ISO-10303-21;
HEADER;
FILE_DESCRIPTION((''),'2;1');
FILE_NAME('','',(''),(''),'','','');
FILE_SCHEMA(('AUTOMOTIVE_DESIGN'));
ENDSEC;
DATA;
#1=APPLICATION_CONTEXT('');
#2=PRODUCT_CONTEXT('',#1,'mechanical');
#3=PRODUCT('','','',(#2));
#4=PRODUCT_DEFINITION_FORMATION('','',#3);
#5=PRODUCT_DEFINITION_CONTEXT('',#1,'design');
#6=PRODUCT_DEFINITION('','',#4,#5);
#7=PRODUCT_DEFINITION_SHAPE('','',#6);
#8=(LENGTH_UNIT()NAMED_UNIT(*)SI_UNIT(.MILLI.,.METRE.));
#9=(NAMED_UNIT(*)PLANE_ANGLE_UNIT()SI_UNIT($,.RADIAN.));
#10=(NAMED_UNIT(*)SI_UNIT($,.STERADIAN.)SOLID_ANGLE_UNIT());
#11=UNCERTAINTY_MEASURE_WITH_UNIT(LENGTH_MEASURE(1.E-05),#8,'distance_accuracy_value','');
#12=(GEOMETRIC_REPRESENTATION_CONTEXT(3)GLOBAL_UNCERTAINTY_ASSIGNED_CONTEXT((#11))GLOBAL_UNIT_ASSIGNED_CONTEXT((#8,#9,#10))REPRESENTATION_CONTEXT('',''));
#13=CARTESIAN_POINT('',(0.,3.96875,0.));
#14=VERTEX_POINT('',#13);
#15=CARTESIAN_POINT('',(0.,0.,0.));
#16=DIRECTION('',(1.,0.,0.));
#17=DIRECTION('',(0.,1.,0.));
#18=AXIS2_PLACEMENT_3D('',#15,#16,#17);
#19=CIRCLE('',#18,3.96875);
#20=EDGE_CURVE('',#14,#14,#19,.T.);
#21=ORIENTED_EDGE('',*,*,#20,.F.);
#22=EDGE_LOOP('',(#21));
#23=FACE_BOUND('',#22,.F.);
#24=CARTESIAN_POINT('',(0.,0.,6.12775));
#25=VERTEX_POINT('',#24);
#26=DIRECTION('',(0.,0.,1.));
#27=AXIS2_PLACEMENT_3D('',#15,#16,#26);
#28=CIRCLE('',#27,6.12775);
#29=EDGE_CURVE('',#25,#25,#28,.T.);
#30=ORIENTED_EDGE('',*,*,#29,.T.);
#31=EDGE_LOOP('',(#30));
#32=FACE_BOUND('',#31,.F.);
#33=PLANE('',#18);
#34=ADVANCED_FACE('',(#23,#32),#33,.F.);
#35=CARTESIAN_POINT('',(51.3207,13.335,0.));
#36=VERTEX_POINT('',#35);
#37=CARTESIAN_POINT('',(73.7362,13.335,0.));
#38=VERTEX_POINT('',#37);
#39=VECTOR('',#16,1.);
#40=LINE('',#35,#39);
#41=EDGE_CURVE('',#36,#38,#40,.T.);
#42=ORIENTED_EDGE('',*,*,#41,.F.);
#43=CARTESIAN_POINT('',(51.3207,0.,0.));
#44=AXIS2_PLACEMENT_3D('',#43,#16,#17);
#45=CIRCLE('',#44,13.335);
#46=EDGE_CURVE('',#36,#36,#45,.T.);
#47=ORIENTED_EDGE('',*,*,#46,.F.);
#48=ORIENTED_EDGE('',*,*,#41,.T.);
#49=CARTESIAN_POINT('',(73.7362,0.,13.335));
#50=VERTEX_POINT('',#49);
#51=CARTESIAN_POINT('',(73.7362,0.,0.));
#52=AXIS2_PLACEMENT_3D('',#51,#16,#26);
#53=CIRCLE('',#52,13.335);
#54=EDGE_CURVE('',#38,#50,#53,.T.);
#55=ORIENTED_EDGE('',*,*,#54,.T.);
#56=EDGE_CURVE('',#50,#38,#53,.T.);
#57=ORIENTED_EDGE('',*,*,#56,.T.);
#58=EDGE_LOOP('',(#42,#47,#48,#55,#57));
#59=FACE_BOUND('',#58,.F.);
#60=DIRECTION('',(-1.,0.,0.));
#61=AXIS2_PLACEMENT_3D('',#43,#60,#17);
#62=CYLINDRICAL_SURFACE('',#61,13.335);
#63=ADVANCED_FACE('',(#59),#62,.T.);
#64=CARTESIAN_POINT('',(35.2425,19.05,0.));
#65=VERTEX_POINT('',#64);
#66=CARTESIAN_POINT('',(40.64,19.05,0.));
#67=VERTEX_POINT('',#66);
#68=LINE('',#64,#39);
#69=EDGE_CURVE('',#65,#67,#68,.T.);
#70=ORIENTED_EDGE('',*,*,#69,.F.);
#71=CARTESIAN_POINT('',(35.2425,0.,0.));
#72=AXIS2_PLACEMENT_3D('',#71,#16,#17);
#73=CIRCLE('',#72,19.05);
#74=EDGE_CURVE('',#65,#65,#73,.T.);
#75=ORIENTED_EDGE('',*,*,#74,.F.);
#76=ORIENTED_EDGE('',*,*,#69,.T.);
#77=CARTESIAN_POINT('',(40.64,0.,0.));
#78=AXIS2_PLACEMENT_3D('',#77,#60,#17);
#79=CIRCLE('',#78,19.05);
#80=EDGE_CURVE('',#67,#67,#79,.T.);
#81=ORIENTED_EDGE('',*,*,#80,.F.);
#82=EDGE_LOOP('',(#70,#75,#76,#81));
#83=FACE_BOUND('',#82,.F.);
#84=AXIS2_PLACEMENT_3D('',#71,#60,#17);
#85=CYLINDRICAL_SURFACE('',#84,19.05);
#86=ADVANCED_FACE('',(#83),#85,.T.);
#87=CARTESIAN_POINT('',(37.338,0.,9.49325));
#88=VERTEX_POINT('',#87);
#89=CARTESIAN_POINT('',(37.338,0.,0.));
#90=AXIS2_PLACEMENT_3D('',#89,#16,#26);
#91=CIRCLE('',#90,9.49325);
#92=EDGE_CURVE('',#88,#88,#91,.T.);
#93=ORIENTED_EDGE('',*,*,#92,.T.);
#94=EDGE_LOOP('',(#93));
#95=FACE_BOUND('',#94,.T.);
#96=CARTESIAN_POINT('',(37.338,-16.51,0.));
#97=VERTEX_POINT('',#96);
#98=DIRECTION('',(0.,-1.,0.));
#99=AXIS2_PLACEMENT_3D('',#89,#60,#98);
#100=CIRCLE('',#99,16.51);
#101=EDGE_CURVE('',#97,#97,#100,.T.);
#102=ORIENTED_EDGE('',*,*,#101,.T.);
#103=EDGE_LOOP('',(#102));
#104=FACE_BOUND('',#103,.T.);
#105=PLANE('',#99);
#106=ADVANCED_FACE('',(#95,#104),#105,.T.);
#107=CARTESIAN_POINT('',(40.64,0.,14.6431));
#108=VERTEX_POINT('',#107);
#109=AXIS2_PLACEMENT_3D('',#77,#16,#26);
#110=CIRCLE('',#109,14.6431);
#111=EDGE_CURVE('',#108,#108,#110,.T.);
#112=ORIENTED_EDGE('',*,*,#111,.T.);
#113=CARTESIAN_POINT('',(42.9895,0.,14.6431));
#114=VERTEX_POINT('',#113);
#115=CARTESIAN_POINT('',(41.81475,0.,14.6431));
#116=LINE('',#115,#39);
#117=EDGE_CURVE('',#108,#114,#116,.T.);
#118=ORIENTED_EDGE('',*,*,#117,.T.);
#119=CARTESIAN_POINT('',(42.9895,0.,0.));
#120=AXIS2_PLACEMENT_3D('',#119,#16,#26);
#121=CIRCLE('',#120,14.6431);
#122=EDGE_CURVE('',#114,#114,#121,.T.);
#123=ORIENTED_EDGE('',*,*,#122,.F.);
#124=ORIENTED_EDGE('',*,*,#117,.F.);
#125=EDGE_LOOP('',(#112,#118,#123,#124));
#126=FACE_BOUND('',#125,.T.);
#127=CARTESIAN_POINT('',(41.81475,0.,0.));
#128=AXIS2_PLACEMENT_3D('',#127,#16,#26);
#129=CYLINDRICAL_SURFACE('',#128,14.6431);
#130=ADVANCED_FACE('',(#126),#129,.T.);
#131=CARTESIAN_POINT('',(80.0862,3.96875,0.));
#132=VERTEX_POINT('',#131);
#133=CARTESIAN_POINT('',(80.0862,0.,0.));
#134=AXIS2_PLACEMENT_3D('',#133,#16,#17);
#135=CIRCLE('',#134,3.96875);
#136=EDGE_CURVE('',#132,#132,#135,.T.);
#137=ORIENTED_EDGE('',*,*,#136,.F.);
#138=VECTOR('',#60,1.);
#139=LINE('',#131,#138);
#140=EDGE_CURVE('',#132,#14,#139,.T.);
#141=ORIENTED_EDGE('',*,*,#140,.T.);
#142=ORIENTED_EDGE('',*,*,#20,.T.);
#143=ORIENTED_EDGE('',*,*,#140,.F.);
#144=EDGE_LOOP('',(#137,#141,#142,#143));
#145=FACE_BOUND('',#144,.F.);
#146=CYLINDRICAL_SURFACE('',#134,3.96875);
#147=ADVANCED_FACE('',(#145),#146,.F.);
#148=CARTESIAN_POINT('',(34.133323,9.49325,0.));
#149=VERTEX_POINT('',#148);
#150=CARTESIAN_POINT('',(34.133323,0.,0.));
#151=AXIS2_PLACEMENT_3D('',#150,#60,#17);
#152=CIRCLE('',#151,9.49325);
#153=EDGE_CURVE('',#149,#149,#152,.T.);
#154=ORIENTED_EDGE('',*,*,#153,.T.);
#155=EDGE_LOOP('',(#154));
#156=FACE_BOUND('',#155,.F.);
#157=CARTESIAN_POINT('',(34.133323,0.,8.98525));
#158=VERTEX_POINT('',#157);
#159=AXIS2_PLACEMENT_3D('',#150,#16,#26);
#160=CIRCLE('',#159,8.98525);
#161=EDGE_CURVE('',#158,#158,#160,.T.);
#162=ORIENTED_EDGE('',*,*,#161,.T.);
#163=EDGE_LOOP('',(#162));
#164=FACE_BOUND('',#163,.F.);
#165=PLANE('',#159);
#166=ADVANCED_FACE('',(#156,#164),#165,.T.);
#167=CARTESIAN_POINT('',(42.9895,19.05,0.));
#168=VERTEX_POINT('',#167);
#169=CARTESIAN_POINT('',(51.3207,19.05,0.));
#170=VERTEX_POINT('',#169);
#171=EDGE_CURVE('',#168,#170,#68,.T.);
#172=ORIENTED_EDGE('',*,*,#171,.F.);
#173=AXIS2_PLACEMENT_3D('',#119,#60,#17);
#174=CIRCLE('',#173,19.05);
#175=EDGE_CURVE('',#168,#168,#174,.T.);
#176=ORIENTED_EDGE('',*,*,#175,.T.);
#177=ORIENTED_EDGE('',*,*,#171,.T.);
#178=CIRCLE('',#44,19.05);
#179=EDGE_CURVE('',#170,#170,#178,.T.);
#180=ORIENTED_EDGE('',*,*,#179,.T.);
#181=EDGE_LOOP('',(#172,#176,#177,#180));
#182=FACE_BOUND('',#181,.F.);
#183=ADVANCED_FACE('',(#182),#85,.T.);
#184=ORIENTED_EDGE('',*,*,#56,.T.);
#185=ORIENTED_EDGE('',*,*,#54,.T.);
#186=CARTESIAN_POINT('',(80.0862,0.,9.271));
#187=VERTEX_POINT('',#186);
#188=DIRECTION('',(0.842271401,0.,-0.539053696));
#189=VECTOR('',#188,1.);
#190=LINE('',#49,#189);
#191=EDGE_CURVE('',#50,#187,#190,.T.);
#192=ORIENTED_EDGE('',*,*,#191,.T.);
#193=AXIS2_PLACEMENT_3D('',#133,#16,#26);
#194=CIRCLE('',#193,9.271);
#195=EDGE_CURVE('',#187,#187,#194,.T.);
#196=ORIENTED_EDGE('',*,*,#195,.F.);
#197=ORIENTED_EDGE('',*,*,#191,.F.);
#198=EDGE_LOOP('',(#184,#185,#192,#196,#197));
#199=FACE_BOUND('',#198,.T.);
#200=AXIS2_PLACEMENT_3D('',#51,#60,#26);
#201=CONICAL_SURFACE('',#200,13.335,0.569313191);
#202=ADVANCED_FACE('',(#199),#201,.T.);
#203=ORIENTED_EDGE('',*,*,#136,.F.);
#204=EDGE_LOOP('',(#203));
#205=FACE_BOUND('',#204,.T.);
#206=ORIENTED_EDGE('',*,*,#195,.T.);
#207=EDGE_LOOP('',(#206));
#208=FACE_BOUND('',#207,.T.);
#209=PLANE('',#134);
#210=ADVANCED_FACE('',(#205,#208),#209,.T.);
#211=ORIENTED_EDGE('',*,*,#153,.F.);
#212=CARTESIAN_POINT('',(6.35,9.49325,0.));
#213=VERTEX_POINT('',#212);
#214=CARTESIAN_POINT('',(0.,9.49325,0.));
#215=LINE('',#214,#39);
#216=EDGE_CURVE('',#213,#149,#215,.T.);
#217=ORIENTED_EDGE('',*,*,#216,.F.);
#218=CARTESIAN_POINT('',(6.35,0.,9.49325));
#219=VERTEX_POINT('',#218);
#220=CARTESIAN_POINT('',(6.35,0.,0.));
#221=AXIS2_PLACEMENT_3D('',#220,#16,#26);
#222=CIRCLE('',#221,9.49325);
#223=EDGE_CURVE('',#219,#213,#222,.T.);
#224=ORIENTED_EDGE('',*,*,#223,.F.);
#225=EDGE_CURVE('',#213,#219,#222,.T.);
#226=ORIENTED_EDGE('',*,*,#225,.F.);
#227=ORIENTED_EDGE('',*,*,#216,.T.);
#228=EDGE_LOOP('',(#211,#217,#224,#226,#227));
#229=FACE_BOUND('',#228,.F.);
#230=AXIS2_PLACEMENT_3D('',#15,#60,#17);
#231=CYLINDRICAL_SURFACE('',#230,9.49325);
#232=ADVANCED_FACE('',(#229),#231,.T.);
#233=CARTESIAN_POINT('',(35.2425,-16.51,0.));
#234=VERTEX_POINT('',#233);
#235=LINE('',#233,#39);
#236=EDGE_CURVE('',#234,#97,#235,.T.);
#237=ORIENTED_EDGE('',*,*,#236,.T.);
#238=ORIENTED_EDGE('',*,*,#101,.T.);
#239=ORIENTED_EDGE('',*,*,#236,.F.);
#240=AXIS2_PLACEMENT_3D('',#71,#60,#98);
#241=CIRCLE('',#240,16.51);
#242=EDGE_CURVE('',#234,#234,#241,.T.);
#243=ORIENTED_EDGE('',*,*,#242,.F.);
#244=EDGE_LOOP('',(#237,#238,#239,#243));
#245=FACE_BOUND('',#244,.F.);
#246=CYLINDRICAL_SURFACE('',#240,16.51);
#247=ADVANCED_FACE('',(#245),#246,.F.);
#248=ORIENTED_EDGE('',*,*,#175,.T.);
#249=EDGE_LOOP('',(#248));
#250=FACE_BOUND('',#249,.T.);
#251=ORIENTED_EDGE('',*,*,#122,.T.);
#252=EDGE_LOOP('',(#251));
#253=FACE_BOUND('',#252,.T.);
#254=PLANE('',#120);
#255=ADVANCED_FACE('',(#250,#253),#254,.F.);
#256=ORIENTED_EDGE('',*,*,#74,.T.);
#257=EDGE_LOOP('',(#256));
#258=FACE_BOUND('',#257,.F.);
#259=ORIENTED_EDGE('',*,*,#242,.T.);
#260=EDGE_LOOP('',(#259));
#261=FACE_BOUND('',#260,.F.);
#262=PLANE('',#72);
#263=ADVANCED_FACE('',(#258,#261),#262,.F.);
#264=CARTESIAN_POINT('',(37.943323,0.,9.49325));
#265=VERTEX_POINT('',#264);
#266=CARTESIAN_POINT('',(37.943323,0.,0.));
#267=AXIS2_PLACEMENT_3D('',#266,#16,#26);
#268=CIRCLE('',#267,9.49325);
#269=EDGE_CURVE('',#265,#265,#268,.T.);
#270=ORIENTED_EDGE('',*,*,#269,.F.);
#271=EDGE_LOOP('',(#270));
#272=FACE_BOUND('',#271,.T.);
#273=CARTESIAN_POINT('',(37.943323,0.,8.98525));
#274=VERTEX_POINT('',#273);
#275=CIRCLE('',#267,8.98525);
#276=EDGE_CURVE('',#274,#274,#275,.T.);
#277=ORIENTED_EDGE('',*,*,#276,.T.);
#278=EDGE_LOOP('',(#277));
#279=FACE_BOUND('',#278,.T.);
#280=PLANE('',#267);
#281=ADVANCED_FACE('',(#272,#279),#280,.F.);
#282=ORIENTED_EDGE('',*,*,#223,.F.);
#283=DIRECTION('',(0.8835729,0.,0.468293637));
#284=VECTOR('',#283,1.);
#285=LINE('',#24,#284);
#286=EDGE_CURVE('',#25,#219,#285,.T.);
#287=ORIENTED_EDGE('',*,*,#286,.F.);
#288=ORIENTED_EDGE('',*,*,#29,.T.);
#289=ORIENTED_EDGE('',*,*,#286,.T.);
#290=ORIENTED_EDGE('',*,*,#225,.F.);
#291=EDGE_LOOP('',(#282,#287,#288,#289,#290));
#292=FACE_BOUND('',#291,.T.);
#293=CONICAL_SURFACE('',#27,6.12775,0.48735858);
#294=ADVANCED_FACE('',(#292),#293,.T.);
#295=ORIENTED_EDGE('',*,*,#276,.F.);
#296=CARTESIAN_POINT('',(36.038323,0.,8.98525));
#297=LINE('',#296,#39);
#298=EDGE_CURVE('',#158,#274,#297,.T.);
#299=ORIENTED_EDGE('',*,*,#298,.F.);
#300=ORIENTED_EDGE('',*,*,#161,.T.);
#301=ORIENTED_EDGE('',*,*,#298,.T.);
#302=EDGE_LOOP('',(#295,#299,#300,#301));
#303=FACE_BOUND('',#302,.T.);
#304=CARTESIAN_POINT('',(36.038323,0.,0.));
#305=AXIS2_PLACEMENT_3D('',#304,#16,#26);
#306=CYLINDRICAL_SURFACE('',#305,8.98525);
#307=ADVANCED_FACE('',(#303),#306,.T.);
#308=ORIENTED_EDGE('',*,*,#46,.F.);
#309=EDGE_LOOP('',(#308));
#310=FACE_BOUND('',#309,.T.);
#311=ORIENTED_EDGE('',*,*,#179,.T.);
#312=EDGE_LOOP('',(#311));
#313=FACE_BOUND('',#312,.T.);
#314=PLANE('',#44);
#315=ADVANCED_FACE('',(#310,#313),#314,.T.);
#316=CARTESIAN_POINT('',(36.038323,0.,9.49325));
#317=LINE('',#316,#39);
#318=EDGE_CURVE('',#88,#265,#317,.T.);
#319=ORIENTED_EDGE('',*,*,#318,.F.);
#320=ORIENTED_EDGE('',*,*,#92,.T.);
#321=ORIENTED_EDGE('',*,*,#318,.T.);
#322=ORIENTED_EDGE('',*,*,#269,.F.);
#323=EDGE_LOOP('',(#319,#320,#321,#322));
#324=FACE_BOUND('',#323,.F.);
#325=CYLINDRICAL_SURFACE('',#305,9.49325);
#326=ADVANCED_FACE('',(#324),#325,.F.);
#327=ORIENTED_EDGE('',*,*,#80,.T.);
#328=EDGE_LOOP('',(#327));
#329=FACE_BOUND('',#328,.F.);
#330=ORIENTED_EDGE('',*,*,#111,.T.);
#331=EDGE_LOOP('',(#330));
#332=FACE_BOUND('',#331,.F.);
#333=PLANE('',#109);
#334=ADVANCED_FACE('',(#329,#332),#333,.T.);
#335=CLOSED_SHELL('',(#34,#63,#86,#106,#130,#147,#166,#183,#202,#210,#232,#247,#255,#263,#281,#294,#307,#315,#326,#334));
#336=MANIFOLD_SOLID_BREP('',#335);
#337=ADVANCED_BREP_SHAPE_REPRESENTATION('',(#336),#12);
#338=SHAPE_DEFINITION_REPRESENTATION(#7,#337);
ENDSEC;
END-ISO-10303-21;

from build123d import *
from build123d import SkipClean  # not in build123d's __all__

# Parameters (mm, degrees)
F0_R     = 9.49325
F1_DEPTH = 35.2425
F2_R     = 19.05
F3_DEPTH = 16.0782
F4_R     = 13.335
F5_DEPTH = 28.7655
F6_R     = 3.96875
F7_DEPTH = 80.0862
F8_R     = 16.51
F8_R_2   = 9.49325
F9_DEPTH = 2.0955
F10_W    = 3.81
F10_H    = 0.508
F12_W    = 2.3495
F12_H    = 4.4069


with BuildPart() as f1:
    # F0 (on Right) → F1 (new body)
    with BuildSketch(Plane.YZ):
        Circle(F0_R)
    extrude(amount=F1_DEPTH)

    # F2 (on face) → F3 (join)
    with BuildSketch(Plane.YZ.offset(35.2425)):
        Circle(F2_R)
    extrude(amount=F3_DEPTH)

    # F4 (on face) → F5 (join)
    with BuildSketch(Plane.YZ.offset(51.3207)):
        Circle(F4_R)
    extrude(amount=F5_DEPTH)

    # F6 (on face) → F7 (cut, through all)
    with BuildSketch(Plane.YZ.offset(80.0862)):
        Circle(F6_R)
    extrude(amount=-F7_DEPTH, mode=Mode.SUBTRACT)

    # F8 (on face) → F9 (cut)
    with BuildSketch(Plane(origin=(35.2425, 0, 0), x_dir=(0, -1, 0), z_dir=(-1, 0, 0))):
        Circle(F8_R)
        Circle(F8_R_2, mode=Mode.SUBTRACT)
    with SkipClean():  # cleaning this boolean's faces spoils the solid; the shape is the same uncleaned
        extrude(amount=-F9_DEPTH, mode=Mode.SUBTRACT)

    # F10 (on Front) → F11 (revolve, cut)
    with BuildSketch(Plane.XZ):
        with Locations((36.0383225369, 9.23925)):
            Rectangle(F10_W, F10_H)
    revolve(axis=Axis((43.7559969723, 0, 0), (1, 0, 0)), mode=Mode.SUBTRACT)

    # F12 (on Front) → F13 (revolve, cut)
    with BuildSketch(Plane.XZ):
        with Locations((41.81475, 16.84655)):
            Rectangle(F12_W, F12_H)
    revolve(axis=Axis((42.9936237633, 0, 0), (1, 0, 0)), mode=Mode.SUBTRACT)

    # F14 (on Front) → F15 (revolve, cut)
    with BuildSketch(Plane.XZ):
        Polygon((6.35, 9.49325), (0, 9.49325), (0, 6.12775), align=None)
        Polygon((80.0862, 13.335), (73.7362, 13.335), (80.0862, 9.271), align=None)
    revolve(axis=Axis((41.732724756, 0, 0), (1, 0, 0)), mode=Mode.SUBTRACT)


solid = f1.part
